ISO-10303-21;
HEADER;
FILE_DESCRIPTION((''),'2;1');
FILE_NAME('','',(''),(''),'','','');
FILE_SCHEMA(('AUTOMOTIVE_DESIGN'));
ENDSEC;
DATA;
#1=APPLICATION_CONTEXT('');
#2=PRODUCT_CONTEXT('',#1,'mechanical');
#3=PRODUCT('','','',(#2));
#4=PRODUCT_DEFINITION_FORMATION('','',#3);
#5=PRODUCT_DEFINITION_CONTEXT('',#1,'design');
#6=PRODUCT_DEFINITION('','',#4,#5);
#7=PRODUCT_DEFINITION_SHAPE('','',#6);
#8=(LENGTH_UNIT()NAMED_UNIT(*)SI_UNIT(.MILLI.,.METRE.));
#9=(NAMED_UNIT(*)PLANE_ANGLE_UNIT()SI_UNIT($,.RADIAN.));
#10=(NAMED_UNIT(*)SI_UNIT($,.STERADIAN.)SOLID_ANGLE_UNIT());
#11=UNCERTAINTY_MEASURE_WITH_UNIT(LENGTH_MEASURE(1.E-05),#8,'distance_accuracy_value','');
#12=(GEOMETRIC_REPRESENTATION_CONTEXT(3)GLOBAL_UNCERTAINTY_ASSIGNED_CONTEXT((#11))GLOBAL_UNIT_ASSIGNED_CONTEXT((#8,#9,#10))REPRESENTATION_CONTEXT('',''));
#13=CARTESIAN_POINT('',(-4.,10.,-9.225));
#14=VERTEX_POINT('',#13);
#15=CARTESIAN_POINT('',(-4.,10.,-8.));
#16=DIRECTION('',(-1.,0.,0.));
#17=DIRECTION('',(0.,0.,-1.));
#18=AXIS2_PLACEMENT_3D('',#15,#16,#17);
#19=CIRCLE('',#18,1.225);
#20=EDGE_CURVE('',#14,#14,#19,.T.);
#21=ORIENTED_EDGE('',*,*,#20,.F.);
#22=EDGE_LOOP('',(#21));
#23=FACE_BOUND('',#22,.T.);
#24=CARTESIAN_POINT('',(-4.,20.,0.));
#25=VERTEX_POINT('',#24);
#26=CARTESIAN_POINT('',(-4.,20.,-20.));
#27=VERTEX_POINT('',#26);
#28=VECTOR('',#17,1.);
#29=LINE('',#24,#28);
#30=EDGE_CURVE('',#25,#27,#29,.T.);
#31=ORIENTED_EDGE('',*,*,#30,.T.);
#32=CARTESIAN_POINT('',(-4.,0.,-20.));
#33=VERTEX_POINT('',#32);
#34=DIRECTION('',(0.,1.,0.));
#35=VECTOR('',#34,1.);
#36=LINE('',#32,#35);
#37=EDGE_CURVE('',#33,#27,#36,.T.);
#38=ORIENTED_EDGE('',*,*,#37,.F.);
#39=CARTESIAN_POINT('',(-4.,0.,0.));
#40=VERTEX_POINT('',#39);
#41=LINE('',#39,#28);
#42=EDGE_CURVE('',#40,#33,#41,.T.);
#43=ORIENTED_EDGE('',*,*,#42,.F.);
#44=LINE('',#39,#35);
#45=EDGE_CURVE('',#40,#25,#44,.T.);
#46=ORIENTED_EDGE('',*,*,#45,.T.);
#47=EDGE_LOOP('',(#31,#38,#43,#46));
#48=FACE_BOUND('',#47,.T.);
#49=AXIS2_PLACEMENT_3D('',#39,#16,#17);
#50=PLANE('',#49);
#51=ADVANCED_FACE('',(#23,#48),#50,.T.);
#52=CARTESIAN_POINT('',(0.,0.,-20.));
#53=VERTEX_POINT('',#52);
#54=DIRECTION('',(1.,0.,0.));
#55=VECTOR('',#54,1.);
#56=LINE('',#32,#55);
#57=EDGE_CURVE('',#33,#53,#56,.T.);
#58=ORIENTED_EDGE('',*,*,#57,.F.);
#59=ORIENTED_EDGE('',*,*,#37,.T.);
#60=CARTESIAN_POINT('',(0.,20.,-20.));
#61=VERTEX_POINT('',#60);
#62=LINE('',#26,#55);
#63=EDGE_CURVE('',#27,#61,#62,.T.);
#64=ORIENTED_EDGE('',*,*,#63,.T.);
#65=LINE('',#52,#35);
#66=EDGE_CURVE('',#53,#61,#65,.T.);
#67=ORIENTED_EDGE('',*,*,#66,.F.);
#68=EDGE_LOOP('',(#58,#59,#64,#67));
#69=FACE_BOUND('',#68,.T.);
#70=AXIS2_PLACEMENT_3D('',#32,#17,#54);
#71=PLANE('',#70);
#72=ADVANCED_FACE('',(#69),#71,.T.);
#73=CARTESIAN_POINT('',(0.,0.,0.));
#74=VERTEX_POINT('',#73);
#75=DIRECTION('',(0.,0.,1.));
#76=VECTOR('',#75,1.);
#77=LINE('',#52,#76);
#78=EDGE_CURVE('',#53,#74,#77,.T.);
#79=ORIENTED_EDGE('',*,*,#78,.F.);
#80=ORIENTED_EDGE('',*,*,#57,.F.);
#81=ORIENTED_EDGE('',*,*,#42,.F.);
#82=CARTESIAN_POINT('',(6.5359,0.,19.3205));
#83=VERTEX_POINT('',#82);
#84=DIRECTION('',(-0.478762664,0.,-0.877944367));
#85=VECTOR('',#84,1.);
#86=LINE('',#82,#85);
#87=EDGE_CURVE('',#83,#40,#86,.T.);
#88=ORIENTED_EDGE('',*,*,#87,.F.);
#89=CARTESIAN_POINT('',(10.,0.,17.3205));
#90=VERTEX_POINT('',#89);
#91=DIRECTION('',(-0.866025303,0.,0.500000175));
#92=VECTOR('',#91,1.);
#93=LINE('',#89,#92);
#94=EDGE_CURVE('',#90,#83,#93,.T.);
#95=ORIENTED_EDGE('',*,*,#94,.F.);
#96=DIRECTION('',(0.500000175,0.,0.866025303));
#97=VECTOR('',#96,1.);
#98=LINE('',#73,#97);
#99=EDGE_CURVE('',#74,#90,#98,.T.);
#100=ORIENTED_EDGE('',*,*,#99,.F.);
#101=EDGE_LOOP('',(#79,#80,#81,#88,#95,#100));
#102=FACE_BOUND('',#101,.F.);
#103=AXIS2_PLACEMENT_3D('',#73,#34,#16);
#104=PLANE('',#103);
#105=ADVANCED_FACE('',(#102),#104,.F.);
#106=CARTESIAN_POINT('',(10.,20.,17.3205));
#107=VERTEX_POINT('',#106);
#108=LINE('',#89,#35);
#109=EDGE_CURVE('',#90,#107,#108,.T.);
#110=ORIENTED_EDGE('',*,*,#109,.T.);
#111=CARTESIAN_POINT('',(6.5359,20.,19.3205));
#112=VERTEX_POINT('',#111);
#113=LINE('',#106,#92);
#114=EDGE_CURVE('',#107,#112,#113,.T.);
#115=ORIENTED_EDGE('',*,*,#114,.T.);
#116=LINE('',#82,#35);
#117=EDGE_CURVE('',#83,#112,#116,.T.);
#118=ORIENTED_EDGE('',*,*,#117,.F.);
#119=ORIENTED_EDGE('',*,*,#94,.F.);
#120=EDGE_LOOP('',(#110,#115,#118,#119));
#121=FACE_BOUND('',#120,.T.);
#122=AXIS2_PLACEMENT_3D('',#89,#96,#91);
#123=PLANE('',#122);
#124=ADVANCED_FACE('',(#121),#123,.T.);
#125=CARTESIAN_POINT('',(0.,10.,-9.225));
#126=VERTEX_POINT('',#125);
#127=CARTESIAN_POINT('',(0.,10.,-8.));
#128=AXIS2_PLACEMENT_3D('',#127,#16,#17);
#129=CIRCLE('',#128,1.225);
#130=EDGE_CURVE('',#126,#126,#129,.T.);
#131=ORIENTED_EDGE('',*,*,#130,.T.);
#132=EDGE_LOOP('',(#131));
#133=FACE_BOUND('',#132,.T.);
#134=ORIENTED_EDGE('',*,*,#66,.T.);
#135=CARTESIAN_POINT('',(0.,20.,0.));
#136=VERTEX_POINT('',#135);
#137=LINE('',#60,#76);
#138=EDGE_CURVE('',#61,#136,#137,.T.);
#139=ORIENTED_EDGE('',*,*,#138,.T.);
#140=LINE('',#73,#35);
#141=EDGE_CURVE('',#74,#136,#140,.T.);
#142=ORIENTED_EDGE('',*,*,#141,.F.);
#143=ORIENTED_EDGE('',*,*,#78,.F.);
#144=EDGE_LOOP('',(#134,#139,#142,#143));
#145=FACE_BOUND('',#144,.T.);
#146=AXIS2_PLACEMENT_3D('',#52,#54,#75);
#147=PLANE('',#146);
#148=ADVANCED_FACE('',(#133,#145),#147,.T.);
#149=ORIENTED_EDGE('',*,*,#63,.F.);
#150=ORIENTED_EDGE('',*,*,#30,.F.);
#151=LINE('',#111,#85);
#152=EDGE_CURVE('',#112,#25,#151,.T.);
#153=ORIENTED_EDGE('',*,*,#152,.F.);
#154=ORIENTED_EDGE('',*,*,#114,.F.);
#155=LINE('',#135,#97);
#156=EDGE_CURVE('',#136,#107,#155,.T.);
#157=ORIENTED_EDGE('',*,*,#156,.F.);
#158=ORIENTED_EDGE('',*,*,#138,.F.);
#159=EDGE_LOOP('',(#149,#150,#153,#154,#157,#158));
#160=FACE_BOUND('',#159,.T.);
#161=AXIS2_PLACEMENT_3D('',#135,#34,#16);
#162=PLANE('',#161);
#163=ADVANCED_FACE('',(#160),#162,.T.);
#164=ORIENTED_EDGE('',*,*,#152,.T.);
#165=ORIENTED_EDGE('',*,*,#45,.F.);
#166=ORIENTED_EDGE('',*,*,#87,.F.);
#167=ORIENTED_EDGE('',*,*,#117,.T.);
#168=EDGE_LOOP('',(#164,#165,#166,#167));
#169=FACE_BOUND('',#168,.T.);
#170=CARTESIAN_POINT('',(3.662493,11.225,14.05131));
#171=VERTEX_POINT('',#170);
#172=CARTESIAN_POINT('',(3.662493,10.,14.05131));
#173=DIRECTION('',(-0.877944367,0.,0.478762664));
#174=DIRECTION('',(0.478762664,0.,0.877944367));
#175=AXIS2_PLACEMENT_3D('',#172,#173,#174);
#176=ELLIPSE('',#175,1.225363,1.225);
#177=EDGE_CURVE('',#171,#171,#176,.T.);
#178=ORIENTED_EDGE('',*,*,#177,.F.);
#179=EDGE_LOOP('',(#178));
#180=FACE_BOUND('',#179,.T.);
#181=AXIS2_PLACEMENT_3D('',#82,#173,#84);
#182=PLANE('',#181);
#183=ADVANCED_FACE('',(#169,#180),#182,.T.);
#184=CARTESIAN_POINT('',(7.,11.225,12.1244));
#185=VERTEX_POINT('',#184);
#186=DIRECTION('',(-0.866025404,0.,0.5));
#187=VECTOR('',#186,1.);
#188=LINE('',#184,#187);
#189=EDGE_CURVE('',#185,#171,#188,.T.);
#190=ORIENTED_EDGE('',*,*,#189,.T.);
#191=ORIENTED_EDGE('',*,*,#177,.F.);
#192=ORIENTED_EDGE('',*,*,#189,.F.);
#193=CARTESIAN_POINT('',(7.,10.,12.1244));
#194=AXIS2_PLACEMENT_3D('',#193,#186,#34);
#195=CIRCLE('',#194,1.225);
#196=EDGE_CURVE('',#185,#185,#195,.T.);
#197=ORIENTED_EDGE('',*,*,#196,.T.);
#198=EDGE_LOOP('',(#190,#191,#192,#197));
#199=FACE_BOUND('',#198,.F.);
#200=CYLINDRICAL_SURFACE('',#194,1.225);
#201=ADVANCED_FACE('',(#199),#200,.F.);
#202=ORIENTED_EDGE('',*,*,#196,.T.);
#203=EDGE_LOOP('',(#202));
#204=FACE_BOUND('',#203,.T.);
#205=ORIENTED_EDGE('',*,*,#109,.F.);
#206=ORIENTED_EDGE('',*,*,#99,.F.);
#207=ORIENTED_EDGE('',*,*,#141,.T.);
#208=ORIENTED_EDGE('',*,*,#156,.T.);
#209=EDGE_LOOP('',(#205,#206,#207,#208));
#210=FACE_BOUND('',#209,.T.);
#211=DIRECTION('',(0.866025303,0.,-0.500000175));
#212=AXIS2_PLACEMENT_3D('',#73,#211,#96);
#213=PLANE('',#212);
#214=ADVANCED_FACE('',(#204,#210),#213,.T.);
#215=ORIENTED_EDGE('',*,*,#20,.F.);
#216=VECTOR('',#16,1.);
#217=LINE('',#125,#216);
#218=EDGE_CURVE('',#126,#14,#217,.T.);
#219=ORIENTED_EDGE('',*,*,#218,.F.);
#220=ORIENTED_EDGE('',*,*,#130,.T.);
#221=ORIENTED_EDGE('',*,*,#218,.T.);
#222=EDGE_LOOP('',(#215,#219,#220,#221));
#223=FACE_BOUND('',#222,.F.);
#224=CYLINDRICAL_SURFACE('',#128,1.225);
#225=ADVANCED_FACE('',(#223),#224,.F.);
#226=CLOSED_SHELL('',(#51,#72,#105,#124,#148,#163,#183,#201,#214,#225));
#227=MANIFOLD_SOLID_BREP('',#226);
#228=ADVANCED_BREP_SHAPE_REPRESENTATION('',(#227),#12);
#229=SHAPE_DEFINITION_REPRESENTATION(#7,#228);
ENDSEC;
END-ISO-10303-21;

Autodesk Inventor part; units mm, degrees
ref_plane "YZ Plane" through (0, 0, 0) normal (1, 0, 0) x (0, 1, 0)
ref_plane "XZ Plane" through (0, 0, 0) normal (0, 1, 0) x (-1, 0, 0)
ref_plane "XY Plane" through (0, 0, 0) normal (0, 0, 1) x (1, 0, 0)
sketch "Sketch1" plane through (0, 0, 0) normal (0, 1, 0) x (-1, 0, 0)
  line L0 (0, 0) -> (4, 0)
  line L1 (4, 0) -> (4, -20)
  line L2 (4, -20) -> (0, -20)
  line L3 (0, -20) -> (0, 0)
  line L4 (0, 0) -> (-10, 17.3205)
  line L5 (0, 0) -> (20, 0) construction
  line L6 (-10, 17.3205) -> (-6.5359, 19.3205)
  line L7 (-6.5359, 19.3205) -> (4, 0)
  dimension "d0" = 4
  dimension "d1" = 20
  dimension "d2" = 20
  dimension "d3" = 120
  dimension "d4" = 4
extrude "Extrusion1" add sketch "Sketch1" along normal blind 20
sketch "Sketch2" plane through (0, 0, 0) normal (1, 0, 0) x (0, 0, -1)
  line L0 (0, 0) -> (0, 20) projected
  line L1 (0, 0) -> (20, 0) projected
  point P0 (8, 10)
  point P1 (0, 10)
  dimension "d7" = 8
  dimension "d8" = 10
hole "Hole1" at (0, 10, -8) direction (-1, 0, 0) diameter 2.45 end through all
sketch "Sketch3" plane through (0, 0, 0) normal (0.8660254, 0, -0.5) x (-0.5, 0, -0.8660254)
  line L0 (0, 0) -> (0, 20) projected
  line L1 (-20, 20) -> (0, 20) projected
  point P0 (-14, 10)
  point P1 (0, 10)
  dimension "d16" = 14
  dimension "d17" = 10
hole "Hole2" at (7, 10, 12.1244) direction (-0.8660254, 0, 0.5) diameter 2.45 end through all
equation "\"d0\" = d4"
properties part number "150degreebracket" material "Iron, Malleable"
